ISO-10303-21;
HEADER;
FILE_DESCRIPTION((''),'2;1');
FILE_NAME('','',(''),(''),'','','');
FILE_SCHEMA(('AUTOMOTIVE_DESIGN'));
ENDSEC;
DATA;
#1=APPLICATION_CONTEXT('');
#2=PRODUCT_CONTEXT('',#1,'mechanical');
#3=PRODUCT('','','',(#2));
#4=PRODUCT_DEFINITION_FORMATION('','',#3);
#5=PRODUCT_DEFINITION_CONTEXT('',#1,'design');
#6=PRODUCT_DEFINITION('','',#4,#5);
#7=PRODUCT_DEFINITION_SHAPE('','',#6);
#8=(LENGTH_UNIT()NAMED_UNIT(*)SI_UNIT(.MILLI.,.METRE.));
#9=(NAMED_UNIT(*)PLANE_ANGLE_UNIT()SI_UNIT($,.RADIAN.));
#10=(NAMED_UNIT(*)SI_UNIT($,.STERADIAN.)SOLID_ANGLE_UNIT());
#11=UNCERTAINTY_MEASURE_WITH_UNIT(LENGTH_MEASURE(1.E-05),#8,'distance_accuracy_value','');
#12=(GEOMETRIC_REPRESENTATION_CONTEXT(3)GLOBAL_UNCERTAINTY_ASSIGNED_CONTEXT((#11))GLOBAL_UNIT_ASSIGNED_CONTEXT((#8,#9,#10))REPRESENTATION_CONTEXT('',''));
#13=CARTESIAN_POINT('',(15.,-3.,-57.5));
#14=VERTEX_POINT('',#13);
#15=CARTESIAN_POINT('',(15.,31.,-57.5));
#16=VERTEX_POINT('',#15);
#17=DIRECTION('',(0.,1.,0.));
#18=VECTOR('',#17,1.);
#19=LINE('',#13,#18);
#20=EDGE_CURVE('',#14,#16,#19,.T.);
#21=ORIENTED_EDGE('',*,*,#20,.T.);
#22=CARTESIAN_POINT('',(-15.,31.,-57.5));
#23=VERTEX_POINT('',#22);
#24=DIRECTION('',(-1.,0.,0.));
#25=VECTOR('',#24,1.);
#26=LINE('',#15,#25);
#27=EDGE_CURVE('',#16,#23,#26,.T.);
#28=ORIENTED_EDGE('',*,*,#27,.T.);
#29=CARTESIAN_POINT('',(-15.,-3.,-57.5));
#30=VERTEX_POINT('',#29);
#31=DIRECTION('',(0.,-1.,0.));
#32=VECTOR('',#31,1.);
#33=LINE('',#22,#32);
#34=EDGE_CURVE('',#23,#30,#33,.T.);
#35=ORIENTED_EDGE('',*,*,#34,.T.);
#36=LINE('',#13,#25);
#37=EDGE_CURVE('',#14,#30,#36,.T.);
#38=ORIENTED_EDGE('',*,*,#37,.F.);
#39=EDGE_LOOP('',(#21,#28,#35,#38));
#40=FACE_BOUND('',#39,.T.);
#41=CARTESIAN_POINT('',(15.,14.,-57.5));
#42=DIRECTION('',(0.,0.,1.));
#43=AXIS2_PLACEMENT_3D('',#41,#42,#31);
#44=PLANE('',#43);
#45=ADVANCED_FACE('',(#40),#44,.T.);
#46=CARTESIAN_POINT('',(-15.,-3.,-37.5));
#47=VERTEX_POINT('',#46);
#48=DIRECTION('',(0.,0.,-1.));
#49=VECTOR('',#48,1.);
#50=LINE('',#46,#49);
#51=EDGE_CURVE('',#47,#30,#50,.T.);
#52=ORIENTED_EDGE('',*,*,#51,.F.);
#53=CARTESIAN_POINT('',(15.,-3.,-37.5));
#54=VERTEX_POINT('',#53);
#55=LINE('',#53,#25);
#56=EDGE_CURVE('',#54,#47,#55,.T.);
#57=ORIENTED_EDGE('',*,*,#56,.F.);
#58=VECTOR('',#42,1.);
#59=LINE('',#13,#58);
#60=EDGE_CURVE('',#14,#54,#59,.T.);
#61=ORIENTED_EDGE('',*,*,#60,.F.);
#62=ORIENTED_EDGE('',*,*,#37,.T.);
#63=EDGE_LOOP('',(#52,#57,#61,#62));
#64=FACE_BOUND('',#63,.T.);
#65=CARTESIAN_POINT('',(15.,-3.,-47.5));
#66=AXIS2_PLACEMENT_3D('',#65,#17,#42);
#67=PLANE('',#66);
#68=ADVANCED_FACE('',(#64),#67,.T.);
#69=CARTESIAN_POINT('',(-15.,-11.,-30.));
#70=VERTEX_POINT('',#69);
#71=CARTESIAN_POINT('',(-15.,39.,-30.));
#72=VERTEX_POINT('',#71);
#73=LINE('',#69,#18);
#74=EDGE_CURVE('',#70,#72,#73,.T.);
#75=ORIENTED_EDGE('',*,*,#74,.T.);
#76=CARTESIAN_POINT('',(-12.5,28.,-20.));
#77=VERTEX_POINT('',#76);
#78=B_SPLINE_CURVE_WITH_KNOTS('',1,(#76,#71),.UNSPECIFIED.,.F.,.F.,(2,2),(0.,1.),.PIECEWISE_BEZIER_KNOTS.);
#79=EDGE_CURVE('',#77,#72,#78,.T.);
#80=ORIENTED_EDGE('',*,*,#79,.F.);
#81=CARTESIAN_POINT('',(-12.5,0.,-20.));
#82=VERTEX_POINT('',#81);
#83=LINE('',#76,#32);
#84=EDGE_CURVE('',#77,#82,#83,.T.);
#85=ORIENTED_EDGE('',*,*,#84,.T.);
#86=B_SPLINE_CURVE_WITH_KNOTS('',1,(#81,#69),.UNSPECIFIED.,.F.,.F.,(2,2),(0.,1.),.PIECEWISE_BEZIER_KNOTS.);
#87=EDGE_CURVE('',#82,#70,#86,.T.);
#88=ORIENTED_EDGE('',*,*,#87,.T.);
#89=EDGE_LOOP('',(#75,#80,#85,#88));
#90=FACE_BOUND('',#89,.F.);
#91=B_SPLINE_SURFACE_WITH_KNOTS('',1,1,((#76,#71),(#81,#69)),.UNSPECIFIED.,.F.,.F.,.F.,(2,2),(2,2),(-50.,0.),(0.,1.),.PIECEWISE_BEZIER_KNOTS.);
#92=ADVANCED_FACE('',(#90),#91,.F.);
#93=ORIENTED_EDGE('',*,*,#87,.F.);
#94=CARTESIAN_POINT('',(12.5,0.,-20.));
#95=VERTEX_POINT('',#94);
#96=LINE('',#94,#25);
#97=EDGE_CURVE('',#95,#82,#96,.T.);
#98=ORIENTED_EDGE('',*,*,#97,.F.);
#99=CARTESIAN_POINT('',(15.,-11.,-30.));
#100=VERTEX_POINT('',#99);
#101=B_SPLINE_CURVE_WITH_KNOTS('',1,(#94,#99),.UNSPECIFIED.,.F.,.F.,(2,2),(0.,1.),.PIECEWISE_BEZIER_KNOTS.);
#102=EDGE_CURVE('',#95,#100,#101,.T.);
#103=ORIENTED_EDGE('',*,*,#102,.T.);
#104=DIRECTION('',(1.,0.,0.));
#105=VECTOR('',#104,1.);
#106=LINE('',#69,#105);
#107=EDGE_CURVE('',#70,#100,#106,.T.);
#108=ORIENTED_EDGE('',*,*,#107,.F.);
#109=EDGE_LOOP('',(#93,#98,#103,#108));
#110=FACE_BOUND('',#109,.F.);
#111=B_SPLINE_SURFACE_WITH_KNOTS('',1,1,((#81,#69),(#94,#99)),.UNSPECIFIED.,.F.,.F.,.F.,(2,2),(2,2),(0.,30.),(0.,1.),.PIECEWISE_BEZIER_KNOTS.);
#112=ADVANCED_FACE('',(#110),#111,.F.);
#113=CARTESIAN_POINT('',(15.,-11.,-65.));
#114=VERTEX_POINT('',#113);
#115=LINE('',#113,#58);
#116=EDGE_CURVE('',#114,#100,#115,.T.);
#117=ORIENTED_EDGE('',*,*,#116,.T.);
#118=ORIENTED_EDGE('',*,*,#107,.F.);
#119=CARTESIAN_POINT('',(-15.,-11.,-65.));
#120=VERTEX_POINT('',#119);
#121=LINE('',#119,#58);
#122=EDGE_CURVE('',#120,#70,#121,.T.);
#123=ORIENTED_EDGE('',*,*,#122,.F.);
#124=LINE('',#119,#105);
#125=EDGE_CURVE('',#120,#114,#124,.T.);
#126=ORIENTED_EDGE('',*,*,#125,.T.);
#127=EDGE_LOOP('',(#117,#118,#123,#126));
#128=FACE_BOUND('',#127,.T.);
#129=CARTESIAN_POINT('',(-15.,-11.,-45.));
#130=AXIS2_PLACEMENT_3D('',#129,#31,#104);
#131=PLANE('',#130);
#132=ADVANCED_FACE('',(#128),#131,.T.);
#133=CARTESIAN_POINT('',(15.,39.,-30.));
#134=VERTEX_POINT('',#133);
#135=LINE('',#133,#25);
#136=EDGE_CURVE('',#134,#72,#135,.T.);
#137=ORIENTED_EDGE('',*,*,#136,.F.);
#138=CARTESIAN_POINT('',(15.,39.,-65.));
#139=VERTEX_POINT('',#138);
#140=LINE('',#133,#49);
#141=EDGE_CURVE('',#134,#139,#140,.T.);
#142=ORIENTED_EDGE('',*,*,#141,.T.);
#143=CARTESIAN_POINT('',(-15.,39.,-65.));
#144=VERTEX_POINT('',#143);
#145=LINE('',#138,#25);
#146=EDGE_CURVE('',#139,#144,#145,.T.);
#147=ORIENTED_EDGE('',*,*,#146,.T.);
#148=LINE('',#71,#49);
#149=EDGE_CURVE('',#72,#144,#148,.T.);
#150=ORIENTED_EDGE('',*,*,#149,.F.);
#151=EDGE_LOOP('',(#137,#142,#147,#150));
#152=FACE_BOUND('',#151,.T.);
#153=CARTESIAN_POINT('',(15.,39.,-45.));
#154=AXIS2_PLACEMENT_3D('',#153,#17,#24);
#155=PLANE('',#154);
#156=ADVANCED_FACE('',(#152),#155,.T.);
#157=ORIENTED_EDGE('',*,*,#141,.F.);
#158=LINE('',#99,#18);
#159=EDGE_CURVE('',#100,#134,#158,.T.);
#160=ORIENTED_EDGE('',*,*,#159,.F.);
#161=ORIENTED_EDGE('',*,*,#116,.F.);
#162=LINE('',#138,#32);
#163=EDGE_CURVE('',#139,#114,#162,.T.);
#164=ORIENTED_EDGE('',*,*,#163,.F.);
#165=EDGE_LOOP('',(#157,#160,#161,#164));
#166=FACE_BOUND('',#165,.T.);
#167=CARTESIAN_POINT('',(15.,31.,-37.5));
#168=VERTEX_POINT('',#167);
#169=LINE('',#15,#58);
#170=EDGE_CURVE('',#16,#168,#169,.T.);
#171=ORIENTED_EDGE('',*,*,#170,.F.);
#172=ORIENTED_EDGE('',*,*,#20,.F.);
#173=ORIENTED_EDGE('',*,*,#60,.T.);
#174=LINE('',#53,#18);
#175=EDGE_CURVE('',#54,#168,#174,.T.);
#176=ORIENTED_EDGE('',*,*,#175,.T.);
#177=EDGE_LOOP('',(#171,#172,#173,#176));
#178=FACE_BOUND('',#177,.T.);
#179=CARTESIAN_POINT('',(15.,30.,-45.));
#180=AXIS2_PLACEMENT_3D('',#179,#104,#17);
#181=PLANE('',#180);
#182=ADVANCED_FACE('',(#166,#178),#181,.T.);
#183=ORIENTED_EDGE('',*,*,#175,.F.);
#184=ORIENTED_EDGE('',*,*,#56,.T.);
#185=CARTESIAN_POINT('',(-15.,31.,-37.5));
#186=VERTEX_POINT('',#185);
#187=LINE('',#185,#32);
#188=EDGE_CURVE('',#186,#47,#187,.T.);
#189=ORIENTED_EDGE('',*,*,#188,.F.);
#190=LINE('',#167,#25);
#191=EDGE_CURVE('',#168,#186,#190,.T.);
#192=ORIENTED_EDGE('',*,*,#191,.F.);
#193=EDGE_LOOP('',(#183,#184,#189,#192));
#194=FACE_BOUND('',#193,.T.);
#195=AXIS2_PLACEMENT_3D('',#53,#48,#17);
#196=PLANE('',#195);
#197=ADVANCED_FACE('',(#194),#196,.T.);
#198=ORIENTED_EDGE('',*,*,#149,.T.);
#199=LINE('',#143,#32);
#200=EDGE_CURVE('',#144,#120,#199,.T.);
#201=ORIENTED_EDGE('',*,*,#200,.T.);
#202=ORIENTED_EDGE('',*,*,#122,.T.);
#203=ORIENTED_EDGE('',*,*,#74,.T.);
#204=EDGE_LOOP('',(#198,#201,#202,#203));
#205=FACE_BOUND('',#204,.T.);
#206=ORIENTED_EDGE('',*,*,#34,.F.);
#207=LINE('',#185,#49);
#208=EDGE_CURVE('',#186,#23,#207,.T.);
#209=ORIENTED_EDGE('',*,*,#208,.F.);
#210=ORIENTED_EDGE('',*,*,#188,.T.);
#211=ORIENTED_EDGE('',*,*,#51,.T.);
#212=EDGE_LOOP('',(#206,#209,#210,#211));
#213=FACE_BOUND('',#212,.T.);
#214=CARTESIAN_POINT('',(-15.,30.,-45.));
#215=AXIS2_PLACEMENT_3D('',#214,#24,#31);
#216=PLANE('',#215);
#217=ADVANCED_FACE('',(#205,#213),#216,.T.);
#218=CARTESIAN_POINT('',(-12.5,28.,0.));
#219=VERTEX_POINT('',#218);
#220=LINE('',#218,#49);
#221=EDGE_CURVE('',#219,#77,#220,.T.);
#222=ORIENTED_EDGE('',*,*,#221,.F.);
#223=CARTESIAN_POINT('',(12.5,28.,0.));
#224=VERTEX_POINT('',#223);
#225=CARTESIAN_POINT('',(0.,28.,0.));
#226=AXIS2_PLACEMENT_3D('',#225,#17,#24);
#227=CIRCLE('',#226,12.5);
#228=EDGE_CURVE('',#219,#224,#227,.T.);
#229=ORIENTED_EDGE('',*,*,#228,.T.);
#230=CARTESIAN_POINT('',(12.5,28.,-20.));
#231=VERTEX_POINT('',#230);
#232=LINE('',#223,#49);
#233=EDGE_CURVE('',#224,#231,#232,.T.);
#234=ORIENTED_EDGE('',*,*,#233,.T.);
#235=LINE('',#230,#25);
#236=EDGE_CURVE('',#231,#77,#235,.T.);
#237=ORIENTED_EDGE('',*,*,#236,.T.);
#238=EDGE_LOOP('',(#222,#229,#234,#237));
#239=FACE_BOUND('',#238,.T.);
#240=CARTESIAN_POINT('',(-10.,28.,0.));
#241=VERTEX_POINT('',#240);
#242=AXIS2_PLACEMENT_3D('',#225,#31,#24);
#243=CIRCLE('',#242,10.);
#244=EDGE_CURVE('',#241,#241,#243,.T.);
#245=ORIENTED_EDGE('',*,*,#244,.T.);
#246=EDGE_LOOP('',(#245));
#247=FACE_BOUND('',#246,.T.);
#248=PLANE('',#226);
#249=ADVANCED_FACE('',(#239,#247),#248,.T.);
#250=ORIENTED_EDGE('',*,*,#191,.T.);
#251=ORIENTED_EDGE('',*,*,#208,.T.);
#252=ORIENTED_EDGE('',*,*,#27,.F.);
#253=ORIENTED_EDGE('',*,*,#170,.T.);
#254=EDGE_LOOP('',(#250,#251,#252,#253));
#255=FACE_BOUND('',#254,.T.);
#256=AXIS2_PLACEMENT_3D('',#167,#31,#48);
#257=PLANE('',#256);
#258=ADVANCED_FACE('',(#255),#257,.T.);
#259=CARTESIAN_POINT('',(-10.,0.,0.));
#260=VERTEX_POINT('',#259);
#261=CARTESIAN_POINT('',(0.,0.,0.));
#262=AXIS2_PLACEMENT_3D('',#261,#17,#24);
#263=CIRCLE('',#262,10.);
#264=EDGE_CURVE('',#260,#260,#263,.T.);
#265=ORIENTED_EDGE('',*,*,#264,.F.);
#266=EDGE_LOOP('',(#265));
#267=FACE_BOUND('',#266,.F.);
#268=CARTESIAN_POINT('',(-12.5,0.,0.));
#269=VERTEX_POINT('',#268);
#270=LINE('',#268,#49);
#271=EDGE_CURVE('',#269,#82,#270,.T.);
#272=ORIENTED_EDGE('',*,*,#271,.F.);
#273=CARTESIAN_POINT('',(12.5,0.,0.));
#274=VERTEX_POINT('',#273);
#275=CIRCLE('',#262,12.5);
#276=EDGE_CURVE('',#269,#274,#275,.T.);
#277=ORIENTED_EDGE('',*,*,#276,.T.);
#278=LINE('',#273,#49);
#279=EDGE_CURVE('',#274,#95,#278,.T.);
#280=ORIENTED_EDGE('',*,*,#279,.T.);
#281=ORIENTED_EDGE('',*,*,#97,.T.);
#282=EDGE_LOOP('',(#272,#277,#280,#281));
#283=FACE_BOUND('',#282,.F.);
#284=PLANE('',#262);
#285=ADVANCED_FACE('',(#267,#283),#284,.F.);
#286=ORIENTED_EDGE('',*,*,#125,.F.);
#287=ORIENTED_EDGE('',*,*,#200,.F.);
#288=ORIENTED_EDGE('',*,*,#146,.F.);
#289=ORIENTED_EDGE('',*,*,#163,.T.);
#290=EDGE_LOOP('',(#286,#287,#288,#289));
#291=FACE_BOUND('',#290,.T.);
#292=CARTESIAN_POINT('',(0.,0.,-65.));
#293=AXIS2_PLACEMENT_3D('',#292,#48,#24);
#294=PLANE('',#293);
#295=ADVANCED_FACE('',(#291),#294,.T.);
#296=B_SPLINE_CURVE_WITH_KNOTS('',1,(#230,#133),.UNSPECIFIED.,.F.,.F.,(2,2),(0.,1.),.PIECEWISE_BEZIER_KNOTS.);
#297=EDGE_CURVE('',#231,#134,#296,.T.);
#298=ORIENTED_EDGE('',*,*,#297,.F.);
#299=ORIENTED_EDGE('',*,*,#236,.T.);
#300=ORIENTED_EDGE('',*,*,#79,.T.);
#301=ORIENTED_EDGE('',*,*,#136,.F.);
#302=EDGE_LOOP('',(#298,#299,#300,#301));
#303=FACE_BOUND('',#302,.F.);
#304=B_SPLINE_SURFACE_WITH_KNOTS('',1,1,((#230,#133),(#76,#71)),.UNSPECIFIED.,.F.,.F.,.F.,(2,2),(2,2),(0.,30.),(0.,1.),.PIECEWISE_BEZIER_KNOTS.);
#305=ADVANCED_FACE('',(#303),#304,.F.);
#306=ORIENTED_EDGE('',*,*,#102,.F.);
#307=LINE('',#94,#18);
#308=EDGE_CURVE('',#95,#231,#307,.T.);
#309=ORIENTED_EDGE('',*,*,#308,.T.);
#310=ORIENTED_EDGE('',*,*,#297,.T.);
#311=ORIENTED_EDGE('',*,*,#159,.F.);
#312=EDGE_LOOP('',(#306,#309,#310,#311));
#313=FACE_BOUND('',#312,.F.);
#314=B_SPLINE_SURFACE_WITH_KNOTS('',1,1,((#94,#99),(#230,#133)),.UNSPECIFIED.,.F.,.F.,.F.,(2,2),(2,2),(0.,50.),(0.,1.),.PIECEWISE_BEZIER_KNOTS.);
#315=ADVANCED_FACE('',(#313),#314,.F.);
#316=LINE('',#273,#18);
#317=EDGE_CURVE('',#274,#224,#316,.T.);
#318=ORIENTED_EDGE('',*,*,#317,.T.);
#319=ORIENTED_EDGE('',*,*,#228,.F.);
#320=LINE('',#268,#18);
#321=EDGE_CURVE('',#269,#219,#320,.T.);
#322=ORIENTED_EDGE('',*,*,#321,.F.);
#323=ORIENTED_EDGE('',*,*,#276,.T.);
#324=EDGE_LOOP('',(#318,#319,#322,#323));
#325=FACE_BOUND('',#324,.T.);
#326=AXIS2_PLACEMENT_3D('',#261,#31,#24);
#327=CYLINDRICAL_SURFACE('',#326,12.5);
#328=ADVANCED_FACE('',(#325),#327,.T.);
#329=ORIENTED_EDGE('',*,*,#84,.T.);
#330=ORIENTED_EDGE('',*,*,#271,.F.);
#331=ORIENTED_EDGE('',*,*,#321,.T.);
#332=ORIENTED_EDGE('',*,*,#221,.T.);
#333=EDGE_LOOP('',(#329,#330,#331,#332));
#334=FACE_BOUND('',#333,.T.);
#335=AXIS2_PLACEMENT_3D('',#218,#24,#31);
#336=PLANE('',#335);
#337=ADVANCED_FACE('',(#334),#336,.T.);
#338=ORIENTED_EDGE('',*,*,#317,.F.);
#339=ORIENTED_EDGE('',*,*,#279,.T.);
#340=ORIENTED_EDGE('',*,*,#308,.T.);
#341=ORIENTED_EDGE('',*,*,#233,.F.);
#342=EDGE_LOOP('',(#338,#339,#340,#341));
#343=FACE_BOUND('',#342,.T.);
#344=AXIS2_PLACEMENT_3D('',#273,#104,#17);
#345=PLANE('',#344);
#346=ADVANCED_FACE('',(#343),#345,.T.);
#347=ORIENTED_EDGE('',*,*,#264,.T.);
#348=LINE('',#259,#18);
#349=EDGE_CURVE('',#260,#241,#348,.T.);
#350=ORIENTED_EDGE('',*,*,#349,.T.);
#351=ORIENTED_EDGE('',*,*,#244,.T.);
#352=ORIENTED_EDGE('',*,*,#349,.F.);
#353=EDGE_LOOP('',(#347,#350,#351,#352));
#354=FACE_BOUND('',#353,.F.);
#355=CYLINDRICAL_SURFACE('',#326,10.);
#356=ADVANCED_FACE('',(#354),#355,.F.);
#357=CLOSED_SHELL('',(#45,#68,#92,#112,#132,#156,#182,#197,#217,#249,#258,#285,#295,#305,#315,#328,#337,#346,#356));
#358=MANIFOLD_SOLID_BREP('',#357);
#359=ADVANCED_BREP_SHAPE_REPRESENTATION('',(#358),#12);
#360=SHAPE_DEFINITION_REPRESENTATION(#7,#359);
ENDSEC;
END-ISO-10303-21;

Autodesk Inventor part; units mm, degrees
ref_plane "YZ Plane" through (0, 0, 0) normal (1, 0, 0) x (0, 1, 0)
ref_plane "XZ Plane" through (0, 0, 0) normal (0, 1, 0) x (-1, 0, 0)
sketch "Sketch1" plane through (0, 0, 0) normal (0, 1, 0) x (-1, 0, 0)
  circle A0 centre (0, 0) radius 10
  circle A1 centre (0, 0) radius 12.5
  dimension "d0" = 20
  dimension "d1" = 25
extrude "Extrusion1" add sketch "Sketch1" along normal blind 28
sketch "Sketch2" plane through (0, 0, 0) normal (0, 0, 1) x (1, 0, 0)
  line L0 (12.5, 0) -> (-12.5, 0) projected
  line L1 (12.5, 28) -> (-12.5, 28) projected
  line L2 (-12.5, 0) -> (12.5, 0)
  line L3 (12.5, 0) -> (12.5, 28)
  line L4 (12.5, 28) -> (-12.5, 28)
  line L5 (-12.5, 28) -> (-12.5, 0)
  point P0 (0, 0)
extrude "Extrusion2" add sketch "Sketch2" against normal blind 20
sketch "Sketch3" plane through (0, 28, 0) normal (0, 1, 0) x (1, 0, 0)
  circle A0 centre (0, 0) radius 10
extrude "Extrusion3" cut sketch "Sketch3" against normal blind 50
ref_plane "Work Plane1" through (0, 0, -30) normal (0, 0, -1) x (-1, 0, 0)
sketch "Sketch4" plane through (0, 0, -30) normal (0, 0, -1) x (-1, 0, 0)
  line L0 (0, 0) -> (0, 28)
  line L1 (12.5, 28) -> (-12.5, 28) projected
  line L2 (-15, 30) -> (15, 30)
  line L3 (15, 30) -> (15, -2)
  line L4 (15, -2) -> (-15, -2)
  line L5 (-15, -2) -> (-15, 30)
  line L6 (-15, 30) -> (15, -2) construction
  line L7 (15, 30) -> (-15, -2) construction
  point P0 (0, 14)
  dimension "d9" = 30
  dimension "d10" = 32
extrude "Extrusion4" add sketch "Sketch4" along normal blind 15
sketch "Sketch5" plane through (0, 0, -45) normal (0, 0, -1) x (-1, 0, 0)
  line L0 (15, 30) -> (-15, 30) projected
  line L1 (0, 30) -> (0, -2)
  line L2 (-15, -2) -> (15, -2) projected
  line L3 (-15, 39) -> (15, 39)
  line L4 (15, 39) -> (15, -11)
  line L5 (15, -11) -> (-15, -11)
  line L6 (-15, -11) -> (-15, 39)
  line L7 (-15, 39) -> (15, -11) construction
  line L8 (15, 39) -> (-15, -11) construction
  point P0 (0, 0)
  point P1 (0, 14)
  dimension "d17" = 30
  dimension "d18" = 50
extrude "Extrusion5" add sketch "Sketch5" along normal blind 20 and the other way blind 15
sketch "Sketch7" plane through (15, -11, -30) normal (1, 0, 0) x (0, 0, -1)
  line L0 (0, 0) -> (35, 0) projected
  line L1 (17.5, 0) -> (17.5, 50)
  line L2 (35, 50) -> (0, 50) projected
  line L3 (35, 0) -> (35, 50) projected
  line L4 (35, 25) -> (0, 25)
  line L5 (0, 0) -> (0, 50) projected
  line L6 (7.5, 42) -> (27.5, 42)
  line L7 (27.5, 42) -> (27.5, 8)
  line L8 (27.5, 8) -> (7.5, 8)
  line L9 (7.5, 8) -> (7.5, 42)
  line L10 (7.5, 42) -> (27.5, 8) construction
  line L11 (27.5, 42) -> (7.5, 8) construction
  line L12 (27.5, 42) -> (7.5, 42)
  line L13 (7.5, 42) -> (7.5, 8)
  line L14 (7.5, 8) -> (27.5, 8)
  line L15 (27.5, 8) -> (27.5, 42)
  point P0 (-30, 11)
  point P1 (17.5, 25)
  dimension "d23" = 20
  dimension "d24" = 34
extrude "Extrusion6" cut sketch "Sketch7" against normal blind 30 contours L8 L9 L4 L1 | L1 L4 L7 L8 | L9 L6 L1 L4 | L1 L6 L7 L4
loft "Loft2" add section 1 edges at (0, 28, -20) (12.5, 14, -20) (0, 0, -20) (-12.5, 14, -20) section 2 edges at (15, 14, -30) (0, 39, -30) (-15, 14, -30) (0, -11, -30)
equation "\"BendRadius\" = Thickness"
equation "\"BendReliefWidth\" = Thickness"
equation "\"BendReliefDepth\" = 0.5 * Thickness"
equation "\"CornerReliefSize\" = 4 * Thickness"
equation "\"MinimumRemnant\" = 2 * Thickness"
equation "\"TransitionRadius\" = BendRadius"
equation "\"JacobiRadiusSize\" = BendRadius"
equation "\"GapSize\" = Thickness"
equation "\"Thickness\" = 0.5"
